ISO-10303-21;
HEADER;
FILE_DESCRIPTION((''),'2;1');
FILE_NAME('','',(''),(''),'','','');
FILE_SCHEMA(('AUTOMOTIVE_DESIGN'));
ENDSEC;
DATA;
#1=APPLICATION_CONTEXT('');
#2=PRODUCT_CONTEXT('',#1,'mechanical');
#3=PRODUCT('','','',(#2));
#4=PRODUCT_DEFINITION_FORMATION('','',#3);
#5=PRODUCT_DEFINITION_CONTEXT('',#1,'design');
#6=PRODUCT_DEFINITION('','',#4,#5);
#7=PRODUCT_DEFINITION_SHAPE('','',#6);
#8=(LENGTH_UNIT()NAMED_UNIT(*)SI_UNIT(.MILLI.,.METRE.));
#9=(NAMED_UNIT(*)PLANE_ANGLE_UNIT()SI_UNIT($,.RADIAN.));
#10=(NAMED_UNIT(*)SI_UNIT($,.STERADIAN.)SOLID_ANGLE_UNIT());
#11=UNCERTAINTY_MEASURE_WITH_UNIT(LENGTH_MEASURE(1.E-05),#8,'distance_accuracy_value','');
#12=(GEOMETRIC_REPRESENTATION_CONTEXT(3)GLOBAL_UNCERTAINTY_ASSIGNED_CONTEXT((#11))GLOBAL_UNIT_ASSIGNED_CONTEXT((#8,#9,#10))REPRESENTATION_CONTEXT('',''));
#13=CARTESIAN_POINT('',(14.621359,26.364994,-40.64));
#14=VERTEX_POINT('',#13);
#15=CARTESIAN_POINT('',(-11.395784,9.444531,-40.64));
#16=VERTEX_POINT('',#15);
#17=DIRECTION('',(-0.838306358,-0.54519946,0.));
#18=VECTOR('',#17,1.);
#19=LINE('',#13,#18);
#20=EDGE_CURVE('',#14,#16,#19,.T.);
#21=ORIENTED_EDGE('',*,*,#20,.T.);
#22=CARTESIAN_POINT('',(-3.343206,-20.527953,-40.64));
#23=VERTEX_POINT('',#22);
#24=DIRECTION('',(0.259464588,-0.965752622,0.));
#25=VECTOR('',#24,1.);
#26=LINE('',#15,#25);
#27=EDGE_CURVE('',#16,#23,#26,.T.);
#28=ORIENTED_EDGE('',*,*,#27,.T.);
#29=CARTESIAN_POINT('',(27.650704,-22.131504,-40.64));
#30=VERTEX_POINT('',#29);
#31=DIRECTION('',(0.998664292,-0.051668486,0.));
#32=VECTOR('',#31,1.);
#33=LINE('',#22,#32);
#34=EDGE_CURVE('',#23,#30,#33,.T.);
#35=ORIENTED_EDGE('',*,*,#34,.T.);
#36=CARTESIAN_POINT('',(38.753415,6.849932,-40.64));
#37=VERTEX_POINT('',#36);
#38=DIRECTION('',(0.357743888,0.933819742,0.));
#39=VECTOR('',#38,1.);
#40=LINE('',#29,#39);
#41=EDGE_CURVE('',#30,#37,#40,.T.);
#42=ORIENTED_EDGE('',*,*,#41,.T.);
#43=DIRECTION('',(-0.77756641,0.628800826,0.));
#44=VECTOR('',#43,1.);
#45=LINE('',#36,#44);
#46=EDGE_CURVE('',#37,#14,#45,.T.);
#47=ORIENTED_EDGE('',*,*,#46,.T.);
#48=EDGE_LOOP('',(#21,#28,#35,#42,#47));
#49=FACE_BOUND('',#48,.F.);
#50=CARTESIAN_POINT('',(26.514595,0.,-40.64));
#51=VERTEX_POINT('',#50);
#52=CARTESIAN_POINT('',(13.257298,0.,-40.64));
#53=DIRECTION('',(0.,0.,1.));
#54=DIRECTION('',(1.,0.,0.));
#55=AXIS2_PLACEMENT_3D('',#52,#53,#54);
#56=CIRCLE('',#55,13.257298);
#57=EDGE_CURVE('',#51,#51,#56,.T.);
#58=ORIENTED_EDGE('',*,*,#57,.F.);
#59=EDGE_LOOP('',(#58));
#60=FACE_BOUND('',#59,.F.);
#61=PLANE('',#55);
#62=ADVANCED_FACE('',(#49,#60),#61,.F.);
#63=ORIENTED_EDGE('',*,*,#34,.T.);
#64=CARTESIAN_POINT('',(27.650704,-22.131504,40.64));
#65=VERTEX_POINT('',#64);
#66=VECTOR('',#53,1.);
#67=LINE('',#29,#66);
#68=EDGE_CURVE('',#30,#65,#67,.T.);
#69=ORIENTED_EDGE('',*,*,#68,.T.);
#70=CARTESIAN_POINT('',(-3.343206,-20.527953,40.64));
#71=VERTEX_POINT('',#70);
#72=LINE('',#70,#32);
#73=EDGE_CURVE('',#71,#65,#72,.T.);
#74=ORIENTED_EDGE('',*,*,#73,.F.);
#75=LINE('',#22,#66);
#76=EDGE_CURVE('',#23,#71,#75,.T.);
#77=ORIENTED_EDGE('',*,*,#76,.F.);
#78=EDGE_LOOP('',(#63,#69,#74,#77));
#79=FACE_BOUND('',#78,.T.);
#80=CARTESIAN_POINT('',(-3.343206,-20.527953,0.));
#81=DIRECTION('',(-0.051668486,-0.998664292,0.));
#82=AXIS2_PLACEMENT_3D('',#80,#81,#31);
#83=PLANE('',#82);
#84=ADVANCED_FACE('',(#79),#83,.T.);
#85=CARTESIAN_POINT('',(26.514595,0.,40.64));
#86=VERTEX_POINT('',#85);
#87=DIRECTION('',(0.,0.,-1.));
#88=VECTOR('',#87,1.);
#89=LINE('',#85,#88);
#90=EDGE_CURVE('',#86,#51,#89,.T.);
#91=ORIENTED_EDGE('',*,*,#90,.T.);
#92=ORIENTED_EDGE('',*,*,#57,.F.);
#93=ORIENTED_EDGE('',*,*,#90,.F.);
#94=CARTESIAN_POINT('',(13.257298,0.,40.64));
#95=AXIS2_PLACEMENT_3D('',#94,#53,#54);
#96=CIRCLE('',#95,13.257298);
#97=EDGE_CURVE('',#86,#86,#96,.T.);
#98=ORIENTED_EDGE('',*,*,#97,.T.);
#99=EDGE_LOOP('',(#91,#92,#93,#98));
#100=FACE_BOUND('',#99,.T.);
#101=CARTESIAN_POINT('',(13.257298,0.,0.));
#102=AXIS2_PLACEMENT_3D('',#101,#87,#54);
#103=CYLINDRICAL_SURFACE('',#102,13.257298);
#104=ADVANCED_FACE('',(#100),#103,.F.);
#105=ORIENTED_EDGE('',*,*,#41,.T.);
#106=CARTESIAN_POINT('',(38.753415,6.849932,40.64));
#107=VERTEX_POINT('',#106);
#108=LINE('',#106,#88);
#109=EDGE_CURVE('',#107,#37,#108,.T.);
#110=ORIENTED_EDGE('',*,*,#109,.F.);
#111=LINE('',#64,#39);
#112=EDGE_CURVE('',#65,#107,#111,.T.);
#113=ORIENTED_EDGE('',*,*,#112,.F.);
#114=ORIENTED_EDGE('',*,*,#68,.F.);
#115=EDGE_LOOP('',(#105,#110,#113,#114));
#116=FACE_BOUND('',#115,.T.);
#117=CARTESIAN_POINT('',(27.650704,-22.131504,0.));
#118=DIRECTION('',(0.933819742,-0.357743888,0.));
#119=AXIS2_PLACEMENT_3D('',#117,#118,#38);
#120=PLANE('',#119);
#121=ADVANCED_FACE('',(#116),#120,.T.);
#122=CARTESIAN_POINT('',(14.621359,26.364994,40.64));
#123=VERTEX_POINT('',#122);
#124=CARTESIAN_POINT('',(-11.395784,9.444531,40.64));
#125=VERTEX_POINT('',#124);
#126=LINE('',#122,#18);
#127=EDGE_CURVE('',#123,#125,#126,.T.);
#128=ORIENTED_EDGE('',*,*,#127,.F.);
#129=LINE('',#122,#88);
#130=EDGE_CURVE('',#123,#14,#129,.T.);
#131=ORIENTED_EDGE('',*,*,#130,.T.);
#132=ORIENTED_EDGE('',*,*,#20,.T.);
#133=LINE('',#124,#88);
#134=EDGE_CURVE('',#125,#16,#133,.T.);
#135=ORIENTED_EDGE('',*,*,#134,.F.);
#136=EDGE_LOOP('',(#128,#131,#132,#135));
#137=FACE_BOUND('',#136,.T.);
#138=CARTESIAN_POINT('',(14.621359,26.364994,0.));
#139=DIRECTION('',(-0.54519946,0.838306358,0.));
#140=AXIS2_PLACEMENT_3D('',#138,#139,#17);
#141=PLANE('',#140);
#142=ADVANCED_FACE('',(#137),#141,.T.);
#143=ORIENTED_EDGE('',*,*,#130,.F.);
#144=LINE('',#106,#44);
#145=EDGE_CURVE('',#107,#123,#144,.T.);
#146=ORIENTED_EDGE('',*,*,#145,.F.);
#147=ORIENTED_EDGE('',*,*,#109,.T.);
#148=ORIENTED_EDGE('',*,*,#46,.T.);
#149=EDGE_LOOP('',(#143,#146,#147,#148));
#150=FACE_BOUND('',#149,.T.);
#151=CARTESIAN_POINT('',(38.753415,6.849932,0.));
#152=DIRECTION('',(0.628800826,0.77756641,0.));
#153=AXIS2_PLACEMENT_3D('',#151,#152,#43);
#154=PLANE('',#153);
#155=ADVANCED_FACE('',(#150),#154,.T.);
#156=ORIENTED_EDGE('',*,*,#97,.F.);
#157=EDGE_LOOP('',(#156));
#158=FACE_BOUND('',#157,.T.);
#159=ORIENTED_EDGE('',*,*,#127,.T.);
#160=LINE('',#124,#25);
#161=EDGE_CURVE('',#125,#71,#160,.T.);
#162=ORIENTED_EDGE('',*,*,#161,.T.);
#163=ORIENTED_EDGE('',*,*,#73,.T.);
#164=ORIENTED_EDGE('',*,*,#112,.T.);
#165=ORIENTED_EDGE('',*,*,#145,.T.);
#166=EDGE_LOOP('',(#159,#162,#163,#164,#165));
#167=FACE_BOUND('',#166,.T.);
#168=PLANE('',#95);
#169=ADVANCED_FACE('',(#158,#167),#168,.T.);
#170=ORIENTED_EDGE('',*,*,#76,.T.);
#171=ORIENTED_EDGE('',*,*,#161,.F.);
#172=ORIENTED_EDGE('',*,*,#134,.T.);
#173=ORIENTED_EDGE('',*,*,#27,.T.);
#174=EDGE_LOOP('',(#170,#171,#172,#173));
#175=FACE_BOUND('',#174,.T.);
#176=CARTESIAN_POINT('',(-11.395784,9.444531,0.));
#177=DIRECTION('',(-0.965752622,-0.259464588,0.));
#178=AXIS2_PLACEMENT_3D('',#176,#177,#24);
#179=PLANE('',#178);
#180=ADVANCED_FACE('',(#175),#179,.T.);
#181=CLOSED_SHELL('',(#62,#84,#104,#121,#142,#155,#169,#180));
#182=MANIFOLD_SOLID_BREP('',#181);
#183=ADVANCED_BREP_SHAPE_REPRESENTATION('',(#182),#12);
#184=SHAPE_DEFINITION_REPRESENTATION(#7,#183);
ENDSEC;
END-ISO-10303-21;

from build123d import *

# Parameters (mm, degrees)
F4_R     = 13.2572976872
F5_DEPTH = 40.64


# Not quite as in the source:
# - the program builds the solid bodies; features that only make, move or delete a surface that nothing else refers to are left out


with BuildPart() as f5:
    # F4 (on Top) → F5 (new body, symmetric)
    with BuildSketch(Plane.XY):
        Polygon((-11.3957837711, 9.4445306856), (-3.343205899, -20.527953282), (27.650703699, -22.1315035333), (38.7534154026, 6.8499318763), (14.6213590048, 26.3649942535), align=None)
        with Locations((13.2572976872, 0)):
            Circle(F4_R, mode=Mode.SUBTRACT)
    extrude(amount=F5_DEPTH, both=True)


solid = f5.part
